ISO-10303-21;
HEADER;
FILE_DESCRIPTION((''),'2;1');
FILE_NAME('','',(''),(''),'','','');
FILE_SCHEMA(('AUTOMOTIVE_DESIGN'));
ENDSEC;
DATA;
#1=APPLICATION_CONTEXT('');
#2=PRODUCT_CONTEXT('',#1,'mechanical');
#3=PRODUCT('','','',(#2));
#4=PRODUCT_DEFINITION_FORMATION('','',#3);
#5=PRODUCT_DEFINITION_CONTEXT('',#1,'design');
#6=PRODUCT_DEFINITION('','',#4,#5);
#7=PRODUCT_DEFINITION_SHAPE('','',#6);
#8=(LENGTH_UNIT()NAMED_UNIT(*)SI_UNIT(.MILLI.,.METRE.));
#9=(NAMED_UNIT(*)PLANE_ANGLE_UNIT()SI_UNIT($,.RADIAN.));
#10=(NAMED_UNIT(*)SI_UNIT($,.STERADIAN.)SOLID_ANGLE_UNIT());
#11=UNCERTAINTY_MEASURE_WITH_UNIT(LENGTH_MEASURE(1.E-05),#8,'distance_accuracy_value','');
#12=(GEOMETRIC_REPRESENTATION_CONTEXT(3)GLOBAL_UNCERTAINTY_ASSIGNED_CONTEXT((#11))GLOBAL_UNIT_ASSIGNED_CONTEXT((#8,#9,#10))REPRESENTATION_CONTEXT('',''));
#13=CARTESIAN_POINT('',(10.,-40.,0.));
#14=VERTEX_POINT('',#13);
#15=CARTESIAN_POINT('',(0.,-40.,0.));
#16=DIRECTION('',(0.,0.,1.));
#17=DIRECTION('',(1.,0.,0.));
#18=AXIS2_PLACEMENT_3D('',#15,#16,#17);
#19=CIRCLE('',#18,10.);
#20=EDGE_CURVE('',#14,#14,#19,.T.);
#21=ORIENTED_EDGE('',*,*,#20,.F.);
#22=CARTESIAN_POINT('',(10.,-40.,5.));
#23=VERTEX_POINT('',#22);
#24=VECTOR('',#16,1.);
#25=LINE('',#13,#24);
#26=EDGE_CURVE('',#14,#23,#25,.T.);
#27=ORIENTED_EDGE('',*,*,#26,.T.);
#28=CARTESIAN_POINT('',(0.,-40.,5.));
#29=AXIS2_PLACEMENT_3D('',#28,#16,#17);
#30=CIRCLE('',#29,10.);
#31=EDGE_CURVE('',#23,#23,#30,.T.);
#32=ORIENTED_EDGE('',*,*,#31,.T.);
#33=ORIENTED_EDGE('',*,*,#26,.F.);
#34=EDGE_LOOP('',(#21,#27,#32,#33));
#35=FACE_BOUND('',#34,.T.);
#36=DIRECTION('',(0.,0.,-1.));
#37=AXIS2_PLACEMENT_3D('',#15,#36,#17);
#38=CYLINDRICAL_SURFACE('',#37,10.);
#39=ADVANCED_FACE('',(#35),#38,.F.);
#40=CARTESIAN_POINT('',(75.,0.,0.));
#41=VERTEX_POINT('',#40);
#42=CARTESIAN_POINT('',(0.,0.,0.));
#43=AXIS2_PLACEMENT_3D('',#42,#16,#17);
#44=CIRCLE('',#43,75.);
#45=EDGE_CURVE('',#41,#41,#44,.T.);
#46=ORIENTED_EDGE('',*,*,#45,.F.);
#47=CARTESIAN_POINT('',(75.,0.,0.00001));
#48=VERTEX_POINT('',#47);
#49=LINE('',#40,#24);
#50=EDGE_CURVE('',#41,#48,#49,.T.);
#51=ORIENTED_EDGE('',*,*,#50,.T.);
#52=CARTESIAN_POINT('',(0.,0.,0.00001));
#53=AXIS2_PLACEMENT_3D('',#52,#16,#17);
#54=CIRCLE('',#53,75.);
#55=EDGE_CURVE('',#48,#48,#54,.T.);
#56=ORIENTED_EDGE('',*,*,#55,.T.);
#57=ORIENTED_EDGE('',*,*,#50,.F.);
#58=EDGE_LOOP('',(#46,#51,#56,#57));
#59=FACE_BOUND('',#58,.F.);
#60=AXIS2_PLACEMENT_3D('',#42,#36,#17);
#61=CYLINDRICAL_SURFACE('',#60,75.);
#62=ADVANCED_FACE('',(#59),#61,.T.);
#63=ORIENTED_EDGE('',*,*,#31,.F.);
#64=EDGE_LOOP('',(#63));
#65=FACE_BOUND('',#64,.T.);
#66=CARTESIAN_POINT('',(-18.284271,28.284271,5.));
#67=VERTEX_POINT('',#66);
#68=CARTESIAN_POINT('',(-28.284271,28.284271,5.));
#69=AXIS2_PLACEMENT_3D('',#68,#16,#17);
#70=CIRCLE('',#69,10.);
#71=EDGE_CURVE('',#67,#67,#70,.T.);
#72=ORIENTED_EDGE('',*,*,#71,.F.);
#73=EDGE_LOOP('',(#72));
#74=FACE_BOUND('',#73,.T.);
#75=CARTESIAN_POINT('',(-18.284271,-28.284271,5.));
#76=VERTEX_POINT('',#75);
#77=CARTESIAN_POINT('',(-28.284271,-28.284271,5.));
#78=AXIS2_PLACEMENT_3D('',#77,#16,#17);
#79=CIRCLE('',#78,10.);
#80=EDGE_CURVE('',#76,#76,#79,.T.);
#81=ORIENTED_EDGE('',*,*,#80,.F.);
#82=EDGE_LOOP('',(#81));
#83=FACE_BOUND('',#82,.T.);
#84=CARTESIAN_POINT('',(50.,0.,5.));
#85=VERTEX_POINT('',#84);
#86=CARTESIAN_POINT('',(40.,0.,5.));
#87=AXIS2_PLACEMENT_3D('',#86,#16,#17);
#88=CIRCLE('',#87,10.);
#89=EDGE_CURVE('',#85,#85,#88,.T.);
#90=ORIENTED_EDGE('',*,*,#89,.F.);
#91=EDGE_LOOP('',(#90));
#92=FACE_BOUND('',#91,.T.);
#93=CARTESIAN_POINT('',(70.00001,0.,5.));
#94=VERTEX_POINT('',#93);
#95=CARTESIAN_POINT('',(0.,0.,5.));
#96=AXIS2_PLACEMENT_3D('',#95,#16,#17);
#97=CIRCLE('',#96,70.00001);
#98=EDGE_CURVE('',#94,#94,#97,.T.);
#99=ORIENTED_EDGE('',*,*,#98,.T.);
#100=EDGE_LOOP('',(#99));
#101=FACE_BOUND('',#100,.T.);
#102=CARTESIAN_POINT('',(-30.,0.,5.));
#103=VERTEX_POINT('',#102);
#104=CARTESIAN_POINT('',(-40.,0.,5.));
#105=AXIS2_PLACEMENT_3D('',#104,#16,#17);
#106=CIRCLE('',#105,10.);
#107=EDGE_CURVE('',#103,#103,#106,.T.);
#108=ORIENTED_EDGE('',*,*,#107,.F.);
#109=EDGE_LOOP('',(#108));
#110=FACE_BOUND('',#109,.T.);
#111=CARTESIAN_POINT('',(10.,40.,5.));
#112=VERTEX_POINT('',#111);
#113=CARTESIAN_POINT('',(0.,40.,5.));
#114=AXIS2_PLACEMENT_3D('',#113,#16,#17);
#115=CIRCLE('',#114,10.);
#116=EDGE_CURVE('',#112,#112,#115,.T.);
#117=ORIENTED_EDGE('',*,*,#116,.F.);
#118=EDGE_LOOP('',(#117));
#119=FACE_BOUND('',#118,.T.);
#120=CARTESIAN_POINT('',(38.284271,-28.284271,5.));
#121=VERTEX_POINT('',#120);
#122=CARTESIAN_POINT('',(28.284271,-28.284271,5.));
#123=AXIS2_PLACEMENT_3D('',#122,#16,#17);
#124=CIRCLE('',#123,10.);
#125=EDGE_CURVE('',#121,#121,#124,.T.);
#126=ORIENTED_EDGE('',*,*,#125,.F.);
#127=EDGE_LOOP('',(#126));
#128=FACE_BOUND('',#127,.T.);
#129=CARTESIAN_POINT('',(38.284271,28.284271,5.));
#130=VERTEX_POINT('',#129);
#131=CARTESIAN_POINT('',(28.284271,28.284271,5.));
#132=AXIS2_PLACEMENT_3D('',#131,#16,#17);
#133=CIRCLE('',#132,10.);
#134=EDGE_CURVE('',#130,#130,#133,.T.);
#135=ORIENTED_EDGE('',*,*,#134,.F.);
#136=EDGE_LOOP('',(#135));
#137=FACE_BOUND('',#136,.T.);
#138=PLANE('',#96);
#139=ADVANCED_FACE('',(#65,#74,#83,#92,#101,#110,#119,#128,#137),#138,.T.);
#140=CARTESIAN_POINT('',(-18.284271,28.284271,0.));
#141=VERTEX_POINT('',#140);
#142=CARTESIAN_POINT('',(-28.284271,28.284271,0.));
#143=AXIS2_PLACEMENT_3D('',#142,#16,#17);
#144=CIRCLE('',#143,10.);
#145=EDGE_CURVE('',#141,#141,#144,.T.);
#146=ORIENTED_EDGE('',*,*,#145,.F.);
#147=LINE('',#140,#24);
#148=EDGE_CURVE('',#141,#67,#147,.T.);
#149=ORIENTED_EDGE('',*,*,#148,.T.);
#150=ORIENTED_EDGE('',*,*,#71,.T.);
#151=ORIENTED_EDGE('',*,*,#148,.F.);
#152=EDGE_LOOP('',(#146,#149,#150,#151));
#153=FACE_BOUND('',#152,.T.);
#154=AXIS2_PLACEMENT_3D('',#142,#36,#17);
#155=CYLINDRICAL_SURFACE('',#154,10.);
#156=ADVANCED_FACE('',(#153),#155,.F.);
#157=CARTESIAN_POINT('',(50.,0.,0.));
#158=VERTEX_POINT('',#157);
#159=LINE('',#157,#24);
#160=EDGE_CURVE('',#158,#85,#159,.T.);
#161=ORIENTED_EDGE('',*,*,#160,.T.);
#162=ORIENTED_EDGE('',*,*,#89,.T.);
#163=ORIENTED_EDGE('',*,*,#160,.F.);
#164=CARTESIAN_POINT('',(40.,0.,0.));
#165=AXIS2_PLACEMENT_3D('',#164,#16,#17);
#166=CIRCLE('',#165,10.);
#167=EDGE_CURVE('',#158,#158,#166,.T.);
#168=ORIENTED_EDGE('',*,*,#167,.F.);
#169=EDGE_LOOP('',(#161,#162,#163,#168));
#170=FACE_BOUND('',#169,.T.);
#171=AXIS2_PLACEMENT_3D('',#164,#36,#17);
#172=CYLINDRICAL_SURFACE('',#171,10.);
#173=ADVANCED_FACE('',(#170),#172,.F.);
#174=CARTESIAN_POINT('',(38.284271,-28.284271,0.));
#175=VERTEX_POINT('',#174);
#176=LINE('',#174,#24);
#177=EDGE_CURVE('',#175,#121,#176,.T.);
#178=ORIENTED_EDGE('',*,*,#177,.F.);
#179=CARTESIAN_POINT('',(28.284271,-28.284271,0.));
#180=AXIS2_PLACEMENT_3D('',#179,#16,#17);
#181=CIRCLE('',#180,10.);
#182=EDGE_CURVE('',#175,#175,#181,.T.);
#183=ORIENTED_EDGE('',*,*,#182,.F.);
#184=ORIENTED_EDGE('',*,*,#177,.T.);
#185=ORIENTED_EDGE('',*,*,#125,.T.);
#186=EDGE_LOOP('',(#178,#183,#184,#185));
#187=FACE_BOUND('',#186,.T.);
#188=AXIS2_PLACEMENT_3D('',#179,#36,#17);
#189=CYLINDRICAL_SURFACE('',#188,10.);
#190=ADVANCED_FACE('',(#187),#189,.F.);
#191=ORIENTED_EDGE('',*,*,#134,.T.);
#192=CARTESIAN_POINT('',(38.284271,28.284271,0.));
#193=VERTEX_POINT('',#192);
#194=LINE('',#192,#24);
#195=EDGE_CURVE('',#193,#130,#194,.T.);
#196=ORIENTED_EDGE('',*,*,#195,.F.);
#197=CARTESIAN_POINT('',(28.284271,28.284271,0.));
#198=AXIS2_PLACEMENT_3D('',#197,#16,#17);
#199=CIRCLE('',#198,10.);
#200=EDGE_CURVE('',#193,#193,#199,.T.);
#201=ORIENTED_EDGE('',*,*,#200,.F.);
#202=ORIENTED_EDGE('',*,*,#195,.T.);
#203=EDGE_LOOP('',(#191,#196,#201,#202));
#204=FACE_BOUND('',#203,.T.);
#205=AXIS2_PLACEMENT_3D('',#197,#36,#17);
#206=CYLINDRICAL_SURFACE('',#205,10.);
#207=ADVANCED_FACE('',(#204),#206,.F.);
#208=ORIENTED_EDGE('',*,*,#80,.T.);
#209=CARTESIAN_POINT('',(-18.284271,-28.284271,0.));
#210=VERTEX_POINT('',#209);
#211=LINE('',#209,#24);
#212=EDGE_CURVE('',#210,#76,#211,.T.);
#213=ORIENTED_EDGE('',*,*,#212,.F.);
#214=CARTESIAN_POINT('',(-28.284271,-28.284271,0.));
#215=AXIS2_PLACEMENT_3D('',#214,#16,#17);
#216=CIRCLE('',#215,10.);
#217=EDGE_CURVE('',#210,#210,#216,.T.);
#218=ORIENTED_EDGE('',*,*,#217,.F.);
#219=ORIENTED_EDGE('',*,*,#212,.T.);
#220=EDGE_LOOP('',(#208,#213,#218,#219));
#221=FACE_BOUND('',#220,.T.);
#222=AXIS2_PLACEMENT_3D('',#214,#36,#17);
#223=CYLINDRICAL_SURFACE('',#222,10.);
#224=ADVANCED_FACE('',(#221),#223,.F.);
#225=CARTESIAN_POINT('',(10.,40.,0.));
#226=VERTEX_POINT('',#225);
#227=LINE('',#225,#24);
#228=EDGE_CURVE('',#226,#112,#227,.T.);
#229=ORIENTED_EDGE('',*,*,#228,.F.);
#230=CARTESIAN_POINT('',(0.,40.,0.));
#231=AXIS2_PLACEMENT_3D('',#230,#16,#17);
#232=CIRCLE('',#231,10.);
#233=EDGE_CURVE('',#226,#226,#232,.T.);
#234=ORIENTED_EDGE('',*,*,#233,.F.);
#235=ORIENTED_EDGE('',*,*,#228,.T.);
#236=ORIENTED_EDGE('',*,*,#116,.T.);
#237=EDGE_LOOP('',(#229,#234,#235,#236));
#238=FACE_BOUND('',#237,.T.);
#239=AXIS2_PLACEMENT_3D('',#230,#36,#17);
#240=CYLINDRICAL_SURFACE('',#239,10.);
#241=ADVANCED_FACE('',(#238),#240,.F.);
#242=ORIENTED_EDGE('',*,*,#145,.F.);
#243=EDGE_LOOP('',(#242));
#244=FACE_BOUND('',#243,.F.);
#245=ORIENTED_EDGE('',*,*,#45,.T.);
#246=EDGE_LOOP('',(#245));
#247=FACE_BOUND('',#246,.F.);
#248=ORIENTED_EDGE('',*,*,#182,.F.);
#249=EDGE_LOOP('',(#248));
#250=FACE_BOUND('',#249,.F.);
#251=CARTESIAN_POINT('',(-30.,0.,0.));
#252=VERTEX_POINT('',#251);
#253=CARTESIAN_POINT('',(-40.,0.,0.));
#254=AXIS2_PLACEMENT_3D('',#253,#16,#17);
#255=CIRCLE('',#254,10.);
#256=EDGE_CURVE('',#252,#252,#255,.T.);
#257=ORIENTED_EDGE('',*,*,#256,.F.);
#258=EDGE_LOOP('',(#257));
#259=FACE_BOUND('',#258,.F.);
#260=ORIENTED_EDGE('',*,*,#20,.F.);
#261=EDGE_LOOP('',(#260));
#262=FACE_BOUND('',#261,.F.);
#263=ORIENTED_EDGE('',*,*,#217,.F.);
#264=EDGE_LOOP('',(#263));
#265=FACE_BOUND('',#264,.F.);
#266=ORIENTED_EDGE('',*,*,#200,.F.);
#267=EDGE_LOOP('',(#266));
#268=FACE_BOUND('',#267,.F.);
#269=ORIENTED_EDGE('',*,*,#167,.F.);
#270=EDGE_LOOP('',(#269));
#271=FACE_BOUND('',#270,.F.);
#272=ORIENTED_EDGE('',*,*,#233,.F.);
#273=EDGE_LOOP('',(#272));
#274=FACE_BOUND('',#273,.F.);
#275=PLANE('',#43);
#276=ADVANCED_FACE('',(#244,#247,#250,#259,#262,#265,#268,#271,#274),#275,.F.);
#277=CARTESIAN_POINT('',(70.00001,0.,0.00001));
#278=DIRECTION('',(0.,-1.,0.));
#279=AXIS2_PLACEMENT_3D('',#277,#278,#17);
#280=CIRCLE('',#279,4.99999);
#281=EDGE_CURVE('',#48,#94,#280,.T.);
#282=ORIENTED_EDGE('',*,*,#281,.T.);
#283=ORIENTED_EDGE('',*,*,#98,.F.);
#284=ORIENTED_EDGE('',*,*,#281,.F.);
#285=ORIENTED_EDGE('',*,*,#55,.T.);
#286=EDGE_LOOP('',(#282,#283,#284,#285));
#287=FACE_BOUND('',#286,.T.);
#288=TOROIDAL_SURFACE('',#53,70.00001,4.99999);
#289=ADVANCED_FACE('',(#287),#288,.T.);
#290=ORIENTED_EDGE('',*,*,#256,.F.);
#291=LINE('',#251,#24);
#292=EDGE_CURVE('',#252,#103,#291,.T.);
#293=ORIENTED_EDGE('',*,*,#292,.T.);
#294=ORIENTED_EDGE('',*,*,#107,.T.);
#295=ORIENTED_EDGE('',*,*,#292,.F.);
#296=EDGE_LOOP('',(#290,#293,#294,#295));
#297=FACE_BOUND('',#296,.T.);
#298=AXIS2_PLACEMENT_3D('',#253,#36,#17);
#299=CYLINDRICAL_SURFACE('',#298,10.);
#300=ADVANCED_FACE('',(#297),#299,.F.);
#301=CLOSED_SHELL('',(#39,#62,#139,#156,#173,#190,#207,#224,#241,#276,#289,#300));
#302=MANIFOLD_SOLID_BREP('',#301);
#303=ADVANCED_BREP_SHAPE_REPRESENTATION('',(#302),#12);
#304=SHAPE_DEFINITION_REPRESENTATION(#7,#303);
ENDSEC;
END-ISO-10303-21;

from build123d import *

# Parameters (mm, degrees)
F0_R     = 75
F0_R_2   = 10
F1_DEPTH = 5
F2_R     = 4.99999


# Not quite as in the source:
# - a fillet or chamfer is up to 0.001 mm smaller than in the source, because OpenCascade refuses the exact size
# - the program builds the solid bodies; features that only make, move or delete a surface that nothing else refers to are left out


with BuildPart() as f1:
    # F0 (on Top) → F1 (new body)
    with BuildSketch(Plane.XY):
        Circle(F0_R)
        with Locations((-28.2842712475, -28.2842712475)):
            Circle(F0_R_2, mode=Mode.SUBTRACT)
        with Locations((0, -40)):
            Circle(F0_R_2, mode=Mode.SUBTRACT)
        with Locations((28.2842712475, -28.2842712475)):
            Circle(F0_R_2, mode=Mode.SUBTRACT)
        with Locations((-40, 0)):
            Circle(F0_R_2, mode=Mode.SUBTRACT)
        with Locations((-28.2842712475, 28.2842712475)):
            Circle(F0_R_2, mode=Mode.SUBTRACT)
        with Locations((28.2842712475, 28.2842712475)):
            Circle(F0_R_2, mode=Mode.SUBTRACT)
        with Locations((40, 0)):
            Circle(F0_R_2, mode=Mode.SUBTRACT)
        with Locations((0, 40)):
            Circle(F0_R_2, mode=Mode.SUBTRACT)
    extrude(amount=F1_DEPTH)

    # F2 (radius 5 in the source; OpenCascade refuses exactly that, so slightly less here)
    f2_edges = [f1.edges().sort_by_distance(p)[0] for p in [
        (-75, 0, 5),
    ]]
    fillet(f2_edges, radius=F2_R)


solid = f1.part
